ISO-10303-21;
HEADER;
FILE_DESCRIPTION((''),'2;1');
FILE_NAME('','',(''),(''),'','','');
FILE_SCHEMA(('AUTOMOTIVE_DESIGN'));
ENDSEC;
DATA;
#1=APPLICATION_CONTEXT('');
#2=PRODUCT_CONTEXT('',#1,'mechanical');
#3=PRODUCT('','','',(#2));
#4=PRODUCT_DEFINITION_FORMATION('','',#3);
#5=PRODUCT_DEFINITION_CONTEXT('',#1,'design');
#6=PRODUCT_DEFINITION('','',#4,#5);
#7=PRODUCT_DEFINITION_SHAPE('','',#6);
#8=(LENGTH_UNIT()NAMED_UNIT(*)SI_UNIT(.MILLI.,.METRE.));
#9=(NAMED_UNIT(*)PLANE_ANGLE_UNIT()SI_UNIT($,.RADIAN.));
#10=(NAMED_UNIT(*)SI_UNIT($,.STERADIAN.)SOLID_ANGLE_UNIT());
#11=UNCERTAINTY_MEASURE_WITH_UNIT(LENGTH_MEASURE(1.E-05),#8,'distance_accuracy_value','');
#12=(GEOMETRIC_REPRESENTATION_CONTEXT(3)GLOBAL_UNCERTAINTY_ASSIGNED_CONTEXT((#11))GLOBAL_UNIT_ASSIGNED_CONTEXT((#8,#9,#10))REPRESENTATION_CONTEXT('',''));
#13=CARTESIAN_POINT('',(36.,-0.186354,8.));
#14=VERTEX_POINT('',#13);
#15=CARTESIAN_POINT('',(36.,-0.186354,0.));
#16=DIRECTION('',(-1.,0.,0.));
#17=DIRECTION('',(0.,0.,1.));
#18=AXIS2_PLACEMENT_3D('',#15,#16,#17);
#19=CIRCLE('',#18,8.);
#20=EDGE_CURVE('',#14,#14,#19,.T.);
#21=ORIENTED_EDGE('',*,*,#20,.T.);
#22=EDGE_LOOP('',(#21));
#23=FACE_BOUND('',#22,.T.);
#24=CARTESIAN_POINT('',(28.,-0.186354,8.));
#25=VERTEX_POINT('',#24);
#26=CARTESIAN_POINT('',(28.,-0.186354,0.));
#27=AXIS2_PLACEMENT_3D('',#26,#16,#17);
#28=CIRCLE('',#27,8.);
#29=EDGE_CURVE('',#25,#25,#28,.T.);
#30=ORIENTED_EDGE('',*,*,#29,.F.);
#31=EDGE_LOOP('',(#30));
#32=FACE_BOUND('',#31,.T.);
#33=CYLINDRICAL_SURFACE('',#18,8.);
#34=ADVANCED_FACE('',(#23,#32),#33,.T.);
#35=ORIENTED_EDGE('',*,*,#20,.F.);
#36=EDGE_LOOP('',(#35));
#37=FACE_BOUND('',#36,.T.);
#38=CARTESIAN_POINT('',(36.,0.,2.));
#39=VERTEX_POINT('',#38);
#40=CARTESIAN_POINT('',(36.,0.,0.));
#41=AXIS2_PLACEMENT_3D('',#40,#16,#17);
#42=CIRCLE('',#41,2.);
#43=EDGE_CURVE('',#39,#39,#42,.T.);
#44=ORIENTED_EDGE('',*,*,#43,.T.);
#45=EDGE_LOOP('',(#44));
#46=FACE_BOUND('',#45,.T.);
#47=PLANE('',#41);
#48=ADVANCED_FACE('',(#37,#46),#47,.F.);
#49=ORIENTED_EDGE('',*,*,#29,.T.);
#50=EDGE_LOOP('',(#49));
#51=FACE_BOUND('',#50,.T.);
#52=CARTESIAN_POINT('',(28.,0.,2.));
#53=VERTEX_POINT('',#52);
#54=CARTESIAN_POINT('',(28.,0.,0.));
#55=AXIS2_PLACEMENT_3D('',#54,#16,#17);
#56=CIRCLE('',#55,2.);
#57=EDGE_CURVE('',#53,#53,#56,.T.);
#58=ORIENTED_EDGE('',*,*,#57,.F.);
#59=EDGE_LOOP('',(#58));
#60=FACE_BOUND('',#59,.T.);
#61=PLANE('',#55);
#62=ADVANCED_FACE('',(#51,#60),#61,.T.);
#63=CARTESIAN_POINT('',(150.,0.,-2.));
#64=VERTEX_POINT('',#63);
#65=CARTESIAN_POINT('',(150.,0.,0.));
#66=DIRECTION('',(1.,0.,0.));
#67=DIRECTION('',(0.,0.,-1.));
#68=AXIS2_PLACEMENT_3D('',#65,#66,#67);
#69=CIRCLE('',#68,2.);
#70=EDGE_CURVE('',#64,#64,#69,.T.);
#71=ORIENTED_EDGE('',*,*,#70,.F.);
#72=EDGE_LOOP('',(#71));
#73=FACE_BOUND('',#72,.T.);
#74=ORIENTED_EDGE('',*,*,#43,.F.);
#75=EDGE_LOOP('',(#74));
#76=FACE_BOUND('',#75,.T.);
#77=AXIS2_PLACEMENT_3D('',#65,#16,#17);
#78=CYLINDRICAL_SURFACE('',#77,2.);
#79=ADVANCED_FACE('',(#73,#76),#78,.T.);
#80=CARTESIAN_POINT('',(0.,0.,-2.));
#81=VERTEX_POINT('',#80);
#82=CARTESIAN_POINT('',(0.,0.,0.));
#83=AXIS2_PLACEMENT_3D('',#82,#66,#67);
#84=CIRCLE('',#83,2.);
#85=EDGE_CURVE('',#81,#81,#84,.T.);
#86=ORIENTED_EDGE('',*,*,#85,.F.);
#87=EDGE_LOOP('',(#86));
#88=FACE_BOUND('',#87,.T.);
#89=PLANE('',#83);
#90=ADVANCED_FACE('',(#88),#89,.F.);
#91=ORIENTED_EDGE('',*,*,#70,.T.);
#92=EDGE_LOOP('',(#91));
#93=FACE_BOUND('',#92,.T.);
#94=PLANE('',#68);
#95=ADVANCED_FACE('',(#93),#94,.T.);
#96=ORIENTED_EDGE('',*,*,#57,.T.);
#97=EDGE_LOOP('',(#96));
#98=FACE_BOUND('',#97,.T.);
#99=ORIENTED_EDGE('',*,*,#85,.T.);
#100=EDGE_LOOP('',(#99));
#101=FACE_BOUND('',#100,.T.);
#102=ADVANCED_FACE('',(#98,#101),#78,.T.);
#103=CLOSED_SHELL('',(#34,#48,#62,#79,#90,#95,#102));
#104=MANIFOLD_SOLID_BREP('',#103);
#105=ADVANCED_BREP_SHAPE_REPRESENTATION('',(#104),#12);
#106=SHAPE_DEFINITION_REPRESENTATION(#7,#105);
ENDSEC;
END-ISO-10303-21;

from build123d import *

# Parameters (mm, degrees)
SKETCH1_R               = 2
BOSS_EXTRUDE1_DEPTH     = 150
BOSS_EXTRUDE2_START     = 28
BOSS_EXTRUDE2_OUTLINE_R = 8
BOSS_EXTRUDE2_DEPTH     = 8


# Read off the part's stored shape, not the designer's step: Boss-Extrude2
with BuildPart() as part:
    # Sketch1 → Boss-Extrude1 (new body)
    with BuildSketch(Plane(origin=(0, 0, 0), x_dir=(0, 0, -1), z_dir=(1, 0, 0))):
        Circle(SKETCH1_R)
    extrude(amount=BOSS_EXTRUDE1_DEPTH)

    # Boss-Extrude2 outline → Boss-Extrude2 (add)
    with BuildSketch(Plane.YZ.offset(BOSS_EXTRUDE2_START)):
        with Locations((-0.186353815, 0)):
            Circle(BOSS_EXTRUDE2_OUTLINE_R)
    extrude(amount=BOSS_EXTRUDE2_DEPTH)


solid = part.part
